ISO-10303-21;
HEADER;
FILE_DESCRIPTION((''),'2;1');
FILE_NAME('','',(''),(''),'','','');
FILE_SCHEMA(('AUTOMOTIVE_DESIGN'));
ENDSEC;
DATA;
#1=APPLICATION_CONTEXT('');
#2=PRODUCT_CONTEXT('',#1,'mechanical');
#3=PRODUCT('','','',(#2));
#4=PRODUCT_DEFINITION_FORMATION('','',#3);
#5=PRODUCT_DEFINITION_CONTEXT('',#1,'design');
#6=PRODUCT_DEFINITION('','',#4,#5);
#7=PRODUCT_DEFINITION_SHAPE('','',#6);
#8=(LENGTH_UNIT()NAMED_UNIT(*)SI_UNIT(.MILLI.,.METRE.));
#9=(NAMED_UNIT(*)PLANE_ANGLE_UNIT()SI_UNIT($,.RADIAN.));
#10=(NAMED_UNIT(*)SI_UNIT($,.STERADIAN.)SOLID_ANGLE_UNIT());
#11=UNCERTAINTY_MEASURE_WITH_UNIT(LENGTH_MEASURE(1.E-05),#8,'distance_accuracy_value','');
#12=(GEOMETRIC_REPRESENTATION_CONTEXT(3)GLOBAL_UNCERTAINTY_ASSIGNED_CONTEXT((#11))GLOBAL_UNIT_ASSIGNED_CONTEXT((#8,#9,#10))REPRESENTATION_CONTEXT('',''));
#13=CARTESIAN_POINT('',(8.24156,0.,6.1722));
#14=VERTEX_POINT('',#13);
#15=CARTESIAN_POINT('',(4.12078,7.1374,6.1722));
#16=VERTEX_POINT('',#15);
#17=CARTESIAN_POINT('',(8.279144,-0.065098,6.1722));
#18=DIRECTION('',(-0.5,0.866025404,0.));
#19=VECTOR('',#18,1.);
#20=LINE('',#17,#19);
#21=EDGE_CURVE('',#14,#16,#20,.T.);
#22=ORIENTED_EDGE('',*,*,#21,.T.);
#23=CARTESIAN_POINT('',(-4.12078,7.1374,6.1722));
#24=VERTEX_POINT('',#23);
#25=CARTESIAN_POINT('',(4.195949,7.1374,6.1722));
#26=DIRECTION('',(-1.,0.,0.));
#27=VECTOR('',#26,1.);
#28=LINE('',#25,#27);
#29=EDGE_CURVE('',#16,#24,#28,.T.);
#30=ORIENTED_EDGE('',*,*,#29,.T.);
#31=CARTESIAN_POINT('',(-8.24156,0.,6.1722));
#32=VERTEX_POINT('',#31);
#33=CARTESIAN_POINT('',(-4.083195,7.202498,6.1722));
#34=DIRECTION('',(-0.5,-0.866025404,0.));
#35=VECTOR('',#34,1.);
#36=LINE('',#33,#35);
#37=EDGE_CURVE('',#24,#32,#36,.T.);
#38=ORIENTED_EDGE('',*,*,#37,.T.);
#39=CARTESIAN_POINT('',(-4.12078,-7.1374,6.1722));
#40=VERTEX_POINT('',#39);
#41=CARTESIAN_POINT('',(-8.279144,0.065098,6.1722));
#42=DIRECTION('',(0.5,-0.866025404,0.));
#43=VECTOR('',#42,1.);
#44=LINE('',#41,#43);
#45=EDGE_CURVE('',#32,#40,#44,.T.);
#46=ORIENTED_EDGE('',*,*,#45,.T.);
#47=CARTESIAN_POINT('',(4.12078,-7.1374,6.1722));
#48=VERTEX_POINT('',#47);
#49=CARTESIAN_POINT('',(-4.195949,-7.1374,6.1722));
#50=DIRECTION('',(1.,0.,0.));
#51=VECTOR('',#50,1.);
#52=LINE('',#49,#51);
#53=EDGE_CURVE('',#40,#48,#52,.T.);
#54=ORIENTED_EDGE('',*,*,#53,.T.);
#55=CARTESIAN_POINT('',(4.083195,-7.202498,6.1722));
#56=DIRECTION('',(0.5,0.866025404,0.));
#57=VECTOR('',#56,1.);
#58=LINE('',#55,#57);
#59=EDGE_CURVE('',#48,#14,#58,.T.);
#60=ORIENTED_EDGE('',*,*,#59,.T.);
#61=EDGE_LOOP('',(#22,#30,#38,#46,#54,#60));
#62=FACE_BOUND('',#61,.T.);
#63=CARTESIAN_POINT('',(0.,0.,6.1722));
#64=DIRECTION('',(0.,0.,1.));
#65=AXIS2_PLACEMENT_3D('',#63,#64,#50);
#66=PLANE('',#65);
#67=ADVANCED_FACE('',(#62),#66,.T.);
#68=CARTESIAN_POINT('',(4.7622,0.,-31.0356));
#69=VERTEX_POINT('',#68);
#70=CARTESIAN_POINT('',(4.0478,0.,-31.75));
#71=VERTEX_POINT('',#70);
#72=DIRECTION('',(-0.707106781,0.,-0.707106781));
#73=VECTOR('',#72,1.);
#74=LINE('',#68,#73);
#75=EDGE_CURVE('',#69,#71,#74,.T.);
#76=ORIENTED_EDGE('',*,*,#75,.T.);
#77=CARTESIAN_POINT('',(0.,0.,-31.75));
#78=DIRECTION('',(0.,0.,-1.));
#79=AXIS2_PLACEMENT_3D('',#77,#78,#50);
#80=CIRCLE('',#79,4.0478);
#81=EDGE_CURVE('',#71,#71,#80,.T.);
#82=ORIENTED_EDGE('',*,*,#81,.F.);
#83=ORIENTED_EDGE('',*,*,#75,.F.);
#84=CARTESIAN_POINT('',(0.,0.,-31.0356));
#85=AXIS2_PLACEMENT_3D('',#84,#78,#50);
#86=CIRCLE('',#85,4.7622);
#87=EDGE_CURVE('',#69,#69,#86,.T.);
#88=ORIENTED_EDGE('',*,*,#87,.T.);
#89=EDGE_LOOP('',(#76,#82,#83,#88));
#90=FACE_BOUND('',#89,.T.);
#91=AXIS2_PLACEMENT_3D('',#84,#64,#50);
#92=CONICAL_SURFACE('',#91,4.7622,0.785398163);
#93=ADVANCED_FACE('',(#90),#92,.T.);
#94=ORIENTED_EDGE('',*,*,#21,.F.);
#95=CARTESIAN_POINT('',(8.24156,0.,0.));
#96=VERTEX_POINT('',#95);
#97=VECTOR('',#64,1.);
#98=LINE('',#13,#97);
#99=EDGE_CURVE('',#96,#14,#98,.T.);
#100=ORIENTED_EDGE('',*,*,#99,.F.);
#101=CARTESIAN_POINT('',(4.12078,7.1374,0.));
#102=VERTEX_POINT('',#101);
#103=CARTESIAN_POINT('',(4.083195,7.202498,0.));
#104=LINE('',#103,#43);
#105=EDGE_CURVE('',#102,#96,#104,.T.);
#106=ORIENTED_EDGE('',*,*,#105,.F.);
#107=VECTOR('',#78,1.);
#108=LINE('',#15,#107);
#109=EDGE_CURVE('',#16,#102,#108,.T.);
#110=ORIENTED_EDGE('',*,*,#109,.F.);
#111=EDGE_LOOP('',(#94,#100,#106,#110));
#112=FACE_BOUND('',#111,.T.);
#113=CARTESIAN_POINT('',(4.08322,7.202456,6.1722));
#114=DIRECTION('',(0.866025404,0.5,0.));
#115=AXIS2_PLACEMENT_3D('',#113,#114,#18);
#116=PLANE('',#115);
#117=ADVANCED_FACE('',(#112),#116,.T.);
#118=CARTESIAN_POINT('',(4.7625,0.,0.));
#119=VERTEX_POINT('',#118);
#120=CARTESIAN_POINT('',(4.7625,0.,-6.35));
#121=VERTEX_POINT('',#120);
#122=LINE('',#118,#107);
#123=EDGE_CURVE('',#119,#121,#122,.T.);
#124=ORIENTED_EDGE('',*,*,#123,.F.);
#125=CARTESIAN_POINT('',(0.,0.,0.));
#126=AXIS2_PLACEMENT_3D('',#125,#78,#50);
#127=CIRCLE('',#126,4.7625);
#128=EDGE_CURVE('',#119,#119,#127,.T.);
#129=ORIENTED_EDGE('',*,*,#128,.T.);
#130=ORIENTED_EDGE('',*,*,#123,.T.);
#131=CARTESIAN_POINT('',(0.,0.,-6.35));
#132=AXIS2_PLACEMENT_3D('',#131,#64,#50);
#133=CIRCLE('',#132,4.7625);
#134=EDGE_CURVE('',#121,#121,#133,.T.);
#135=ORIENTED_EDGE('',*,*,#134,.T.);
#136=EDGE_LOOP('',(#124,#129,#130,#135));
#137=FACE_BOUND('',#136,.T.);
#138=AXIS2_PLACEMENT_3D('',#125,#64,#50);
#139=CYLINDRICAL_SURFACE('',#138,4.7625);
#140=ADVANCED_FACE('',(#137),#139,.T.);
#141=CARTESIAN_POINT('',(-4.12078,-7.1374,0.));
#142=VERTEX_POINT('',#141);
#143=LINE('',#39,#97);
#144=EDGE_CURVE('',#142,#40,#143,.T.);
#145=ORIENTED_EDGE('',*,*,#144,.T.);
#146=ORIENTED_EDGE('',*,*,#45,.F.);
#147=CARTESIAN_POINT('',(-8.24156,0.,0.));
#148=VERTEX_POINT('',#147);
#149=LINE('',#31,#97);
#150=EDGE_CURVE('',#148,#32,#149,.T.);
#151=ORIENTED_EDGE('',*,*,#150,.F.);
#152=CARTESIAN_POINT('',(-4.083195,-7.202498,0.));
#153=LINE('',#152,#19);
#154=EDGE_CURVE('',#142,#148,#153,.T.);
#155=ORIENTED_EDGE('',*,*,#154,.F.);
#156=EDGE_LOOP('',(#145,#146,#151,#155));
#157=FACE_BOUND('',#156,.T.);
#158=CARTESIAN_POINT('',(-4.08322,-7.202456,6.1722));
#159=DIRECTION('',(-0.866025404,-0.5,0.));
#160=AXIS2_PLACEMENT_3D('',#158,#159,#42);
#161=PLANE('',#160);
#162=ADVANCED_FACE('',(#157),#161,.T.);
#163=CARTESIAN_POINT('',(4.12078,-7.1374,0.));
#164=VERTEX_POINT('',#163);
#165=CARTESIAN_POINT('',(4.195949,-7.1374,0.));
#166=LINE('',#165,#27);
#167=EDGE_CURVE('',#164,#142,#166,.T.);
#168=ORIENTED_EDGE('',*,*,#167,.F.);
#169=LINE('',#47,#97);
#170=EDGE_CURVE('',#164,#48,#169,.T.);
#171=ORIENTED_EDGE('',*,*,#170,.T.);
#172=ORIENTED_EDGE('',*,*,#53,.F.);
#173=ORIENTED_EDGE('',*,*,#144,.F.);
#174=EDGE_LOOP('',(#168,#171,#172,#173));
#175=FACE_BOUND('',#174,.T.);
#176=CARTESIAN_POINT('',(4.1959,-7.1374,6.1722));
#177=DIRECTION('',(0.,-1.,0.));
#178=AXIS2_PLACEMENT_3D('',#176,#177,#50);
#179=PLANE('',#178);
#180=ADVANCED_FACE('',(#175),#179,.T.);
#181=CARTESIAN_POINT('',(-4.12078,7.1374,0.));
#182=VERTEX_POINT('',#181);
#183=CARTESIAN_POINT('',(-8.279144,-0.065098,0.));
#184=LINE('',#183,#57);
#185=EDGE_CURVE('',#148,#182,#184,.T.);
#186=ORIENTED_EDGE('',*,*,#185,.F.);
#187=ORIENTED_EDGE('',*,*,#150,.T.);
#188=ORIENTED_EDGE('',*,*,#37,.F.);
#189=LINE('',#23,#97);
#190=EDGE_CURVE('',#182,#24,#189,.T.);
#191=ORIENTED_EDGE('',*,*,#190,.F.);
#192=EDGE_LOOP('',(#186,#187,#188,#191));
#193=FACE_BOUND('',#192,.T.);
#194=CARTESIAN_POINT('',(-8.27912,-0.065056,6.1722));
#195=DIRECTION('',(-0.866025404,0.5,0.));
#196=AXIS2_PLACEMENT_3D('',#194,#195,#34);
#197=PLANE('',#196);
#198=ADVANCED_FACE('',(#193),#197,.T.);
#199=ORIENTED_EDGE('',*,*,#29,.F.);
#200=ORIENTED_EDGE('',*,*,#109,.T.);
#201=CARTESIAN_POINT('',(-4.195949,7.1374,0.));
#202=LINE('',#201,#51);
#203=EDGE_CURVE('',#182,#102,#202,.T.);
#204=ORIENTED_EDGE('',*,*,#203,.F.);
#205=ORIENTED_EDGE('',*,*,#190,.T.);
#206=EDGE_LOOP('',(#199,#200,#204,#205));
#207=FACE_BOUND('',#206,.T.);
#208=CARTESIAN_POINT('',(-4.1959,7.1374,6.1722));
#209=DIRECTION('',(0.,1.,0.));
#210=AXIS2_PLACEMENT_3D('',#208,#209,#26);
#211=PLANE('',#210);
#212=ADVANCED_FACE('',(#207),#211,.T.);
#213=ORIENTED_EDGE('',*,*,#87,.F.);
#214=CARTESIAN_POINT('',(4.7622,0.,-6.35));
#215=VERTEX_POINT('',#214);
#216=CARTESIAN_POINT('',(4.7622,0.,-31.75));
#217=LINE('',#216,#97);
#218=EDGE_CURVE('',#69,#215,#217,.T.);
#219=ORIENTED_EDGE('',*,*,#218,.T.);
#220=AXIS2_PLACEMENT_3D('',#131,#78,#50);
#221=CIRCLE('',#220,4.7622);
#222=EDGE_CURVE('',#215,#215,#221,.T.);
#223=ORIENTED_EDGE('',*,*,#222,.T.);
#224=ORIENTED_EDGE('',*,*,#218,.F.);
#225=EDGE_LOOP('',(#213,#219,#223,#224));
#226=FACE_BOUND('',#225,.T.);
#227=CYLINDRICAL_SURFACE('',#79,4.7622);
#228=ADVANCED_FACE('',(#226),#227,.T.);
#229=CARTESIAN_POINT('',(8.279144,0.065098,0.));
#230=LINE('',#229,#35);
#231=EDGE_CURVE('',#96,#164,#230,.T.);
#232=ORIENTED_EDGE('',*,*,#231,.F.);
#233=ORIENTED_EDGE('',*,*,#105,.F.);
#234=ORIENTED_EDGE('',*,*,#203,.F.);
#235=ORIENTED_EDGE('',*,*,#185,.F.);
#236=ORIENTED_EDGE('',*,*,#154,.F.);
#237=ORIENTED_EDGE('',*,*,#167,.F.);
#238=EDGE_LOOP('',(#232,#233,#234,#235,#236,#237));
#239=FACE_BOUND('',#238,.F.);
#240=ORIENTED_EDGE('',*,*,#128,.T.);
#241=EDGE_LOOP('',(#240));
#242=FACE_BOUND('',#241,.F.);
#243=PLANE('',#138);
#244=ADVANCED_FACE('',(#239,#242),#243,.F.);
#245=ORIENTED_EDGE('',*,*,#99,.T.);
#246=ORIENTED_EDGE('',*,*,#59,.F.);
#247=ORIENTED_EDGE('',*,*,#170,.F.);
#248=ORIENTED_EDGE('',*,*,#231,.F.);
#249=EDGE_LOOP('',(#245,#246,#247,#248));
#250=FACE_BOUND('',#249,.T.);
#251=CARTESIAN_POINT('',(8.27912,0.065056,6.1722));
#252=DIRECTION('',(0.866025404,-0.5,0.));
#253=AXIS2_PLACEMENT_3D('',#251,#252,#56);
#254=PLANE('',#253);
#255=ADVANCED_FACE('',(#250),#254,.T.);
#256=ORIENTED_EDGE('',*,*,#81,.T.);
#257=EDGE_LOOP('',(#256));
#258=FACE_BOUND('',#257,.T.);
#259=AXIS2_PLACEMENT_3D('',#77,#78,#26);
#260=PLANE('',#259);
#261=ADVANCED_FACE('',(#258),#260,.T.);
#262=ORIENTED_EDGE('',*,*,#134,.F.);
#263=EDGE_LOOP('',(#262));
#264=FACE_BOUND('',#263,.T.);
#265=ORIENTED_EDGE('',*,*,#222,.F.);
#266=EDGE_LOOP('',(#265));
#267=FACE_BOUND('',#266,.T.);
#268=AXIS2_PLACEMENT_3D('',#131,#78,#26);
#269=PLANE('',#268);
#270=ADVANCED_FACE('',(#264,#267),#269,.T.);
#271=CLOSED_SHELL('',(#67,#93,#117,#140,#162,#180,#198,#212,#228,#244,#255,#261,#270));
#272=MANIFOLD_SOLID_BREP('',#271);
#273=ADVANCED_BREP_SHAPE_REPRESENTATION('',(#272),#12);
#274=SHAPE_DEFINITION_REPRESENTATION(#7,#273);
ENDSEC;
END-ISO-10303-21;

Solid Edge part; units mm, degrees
sketch "Sketch1" plane through (0, 0, 0) normal (0, 0, 1) x (1, 0, 0)
  circle A0 centre (0, 0) radius 8.2794
  dimension "D1" = 16.5588
extrude "Protrusion1" add sketch "Sketch1" along normal blind 6.1722
sketch "Sketch2" plane through (0, 0, 0) normal (0, 0, -1) x (1, 0, 0)
  circle A0 centre (0, 0) radius 4.7625
extrude "Protrusion2" add sketch "Sketch2" along normal blind 31.75
sketch "Sketch3" plane through (0, 0, -31.75) normal (0, 0, -1) x (1, 0, 0)
  circle A0 centre (0, 0) radius 4.7622
extrude "Cutout1" cut sketch "Sketch3" against normal blind 25.4 flip side to cut
chamfer "Chamfer_1" distance 0.7144 angle 45 1 edges at (-4.7622, 0, -31.75)
sketch "Sketch4" plane through (0, 0, 6.1722) normal (0, 0, 1) x (1, 0, 0)
  line L0 (-4.1959, 7.1374) -> (4.1959, 7.1374)
  dimension "D1" = 14.2748
extrude "Cutout2" cut sketch "Sketch4" against normal up to next material side at (0, 7.1874, 6.1722)
pattern_circular "Pattern1" count 6 over 360 about axis through (0, 0, 6.1722) along (0, 0, 1) of "Cutout2"
properties part number "24109036"
